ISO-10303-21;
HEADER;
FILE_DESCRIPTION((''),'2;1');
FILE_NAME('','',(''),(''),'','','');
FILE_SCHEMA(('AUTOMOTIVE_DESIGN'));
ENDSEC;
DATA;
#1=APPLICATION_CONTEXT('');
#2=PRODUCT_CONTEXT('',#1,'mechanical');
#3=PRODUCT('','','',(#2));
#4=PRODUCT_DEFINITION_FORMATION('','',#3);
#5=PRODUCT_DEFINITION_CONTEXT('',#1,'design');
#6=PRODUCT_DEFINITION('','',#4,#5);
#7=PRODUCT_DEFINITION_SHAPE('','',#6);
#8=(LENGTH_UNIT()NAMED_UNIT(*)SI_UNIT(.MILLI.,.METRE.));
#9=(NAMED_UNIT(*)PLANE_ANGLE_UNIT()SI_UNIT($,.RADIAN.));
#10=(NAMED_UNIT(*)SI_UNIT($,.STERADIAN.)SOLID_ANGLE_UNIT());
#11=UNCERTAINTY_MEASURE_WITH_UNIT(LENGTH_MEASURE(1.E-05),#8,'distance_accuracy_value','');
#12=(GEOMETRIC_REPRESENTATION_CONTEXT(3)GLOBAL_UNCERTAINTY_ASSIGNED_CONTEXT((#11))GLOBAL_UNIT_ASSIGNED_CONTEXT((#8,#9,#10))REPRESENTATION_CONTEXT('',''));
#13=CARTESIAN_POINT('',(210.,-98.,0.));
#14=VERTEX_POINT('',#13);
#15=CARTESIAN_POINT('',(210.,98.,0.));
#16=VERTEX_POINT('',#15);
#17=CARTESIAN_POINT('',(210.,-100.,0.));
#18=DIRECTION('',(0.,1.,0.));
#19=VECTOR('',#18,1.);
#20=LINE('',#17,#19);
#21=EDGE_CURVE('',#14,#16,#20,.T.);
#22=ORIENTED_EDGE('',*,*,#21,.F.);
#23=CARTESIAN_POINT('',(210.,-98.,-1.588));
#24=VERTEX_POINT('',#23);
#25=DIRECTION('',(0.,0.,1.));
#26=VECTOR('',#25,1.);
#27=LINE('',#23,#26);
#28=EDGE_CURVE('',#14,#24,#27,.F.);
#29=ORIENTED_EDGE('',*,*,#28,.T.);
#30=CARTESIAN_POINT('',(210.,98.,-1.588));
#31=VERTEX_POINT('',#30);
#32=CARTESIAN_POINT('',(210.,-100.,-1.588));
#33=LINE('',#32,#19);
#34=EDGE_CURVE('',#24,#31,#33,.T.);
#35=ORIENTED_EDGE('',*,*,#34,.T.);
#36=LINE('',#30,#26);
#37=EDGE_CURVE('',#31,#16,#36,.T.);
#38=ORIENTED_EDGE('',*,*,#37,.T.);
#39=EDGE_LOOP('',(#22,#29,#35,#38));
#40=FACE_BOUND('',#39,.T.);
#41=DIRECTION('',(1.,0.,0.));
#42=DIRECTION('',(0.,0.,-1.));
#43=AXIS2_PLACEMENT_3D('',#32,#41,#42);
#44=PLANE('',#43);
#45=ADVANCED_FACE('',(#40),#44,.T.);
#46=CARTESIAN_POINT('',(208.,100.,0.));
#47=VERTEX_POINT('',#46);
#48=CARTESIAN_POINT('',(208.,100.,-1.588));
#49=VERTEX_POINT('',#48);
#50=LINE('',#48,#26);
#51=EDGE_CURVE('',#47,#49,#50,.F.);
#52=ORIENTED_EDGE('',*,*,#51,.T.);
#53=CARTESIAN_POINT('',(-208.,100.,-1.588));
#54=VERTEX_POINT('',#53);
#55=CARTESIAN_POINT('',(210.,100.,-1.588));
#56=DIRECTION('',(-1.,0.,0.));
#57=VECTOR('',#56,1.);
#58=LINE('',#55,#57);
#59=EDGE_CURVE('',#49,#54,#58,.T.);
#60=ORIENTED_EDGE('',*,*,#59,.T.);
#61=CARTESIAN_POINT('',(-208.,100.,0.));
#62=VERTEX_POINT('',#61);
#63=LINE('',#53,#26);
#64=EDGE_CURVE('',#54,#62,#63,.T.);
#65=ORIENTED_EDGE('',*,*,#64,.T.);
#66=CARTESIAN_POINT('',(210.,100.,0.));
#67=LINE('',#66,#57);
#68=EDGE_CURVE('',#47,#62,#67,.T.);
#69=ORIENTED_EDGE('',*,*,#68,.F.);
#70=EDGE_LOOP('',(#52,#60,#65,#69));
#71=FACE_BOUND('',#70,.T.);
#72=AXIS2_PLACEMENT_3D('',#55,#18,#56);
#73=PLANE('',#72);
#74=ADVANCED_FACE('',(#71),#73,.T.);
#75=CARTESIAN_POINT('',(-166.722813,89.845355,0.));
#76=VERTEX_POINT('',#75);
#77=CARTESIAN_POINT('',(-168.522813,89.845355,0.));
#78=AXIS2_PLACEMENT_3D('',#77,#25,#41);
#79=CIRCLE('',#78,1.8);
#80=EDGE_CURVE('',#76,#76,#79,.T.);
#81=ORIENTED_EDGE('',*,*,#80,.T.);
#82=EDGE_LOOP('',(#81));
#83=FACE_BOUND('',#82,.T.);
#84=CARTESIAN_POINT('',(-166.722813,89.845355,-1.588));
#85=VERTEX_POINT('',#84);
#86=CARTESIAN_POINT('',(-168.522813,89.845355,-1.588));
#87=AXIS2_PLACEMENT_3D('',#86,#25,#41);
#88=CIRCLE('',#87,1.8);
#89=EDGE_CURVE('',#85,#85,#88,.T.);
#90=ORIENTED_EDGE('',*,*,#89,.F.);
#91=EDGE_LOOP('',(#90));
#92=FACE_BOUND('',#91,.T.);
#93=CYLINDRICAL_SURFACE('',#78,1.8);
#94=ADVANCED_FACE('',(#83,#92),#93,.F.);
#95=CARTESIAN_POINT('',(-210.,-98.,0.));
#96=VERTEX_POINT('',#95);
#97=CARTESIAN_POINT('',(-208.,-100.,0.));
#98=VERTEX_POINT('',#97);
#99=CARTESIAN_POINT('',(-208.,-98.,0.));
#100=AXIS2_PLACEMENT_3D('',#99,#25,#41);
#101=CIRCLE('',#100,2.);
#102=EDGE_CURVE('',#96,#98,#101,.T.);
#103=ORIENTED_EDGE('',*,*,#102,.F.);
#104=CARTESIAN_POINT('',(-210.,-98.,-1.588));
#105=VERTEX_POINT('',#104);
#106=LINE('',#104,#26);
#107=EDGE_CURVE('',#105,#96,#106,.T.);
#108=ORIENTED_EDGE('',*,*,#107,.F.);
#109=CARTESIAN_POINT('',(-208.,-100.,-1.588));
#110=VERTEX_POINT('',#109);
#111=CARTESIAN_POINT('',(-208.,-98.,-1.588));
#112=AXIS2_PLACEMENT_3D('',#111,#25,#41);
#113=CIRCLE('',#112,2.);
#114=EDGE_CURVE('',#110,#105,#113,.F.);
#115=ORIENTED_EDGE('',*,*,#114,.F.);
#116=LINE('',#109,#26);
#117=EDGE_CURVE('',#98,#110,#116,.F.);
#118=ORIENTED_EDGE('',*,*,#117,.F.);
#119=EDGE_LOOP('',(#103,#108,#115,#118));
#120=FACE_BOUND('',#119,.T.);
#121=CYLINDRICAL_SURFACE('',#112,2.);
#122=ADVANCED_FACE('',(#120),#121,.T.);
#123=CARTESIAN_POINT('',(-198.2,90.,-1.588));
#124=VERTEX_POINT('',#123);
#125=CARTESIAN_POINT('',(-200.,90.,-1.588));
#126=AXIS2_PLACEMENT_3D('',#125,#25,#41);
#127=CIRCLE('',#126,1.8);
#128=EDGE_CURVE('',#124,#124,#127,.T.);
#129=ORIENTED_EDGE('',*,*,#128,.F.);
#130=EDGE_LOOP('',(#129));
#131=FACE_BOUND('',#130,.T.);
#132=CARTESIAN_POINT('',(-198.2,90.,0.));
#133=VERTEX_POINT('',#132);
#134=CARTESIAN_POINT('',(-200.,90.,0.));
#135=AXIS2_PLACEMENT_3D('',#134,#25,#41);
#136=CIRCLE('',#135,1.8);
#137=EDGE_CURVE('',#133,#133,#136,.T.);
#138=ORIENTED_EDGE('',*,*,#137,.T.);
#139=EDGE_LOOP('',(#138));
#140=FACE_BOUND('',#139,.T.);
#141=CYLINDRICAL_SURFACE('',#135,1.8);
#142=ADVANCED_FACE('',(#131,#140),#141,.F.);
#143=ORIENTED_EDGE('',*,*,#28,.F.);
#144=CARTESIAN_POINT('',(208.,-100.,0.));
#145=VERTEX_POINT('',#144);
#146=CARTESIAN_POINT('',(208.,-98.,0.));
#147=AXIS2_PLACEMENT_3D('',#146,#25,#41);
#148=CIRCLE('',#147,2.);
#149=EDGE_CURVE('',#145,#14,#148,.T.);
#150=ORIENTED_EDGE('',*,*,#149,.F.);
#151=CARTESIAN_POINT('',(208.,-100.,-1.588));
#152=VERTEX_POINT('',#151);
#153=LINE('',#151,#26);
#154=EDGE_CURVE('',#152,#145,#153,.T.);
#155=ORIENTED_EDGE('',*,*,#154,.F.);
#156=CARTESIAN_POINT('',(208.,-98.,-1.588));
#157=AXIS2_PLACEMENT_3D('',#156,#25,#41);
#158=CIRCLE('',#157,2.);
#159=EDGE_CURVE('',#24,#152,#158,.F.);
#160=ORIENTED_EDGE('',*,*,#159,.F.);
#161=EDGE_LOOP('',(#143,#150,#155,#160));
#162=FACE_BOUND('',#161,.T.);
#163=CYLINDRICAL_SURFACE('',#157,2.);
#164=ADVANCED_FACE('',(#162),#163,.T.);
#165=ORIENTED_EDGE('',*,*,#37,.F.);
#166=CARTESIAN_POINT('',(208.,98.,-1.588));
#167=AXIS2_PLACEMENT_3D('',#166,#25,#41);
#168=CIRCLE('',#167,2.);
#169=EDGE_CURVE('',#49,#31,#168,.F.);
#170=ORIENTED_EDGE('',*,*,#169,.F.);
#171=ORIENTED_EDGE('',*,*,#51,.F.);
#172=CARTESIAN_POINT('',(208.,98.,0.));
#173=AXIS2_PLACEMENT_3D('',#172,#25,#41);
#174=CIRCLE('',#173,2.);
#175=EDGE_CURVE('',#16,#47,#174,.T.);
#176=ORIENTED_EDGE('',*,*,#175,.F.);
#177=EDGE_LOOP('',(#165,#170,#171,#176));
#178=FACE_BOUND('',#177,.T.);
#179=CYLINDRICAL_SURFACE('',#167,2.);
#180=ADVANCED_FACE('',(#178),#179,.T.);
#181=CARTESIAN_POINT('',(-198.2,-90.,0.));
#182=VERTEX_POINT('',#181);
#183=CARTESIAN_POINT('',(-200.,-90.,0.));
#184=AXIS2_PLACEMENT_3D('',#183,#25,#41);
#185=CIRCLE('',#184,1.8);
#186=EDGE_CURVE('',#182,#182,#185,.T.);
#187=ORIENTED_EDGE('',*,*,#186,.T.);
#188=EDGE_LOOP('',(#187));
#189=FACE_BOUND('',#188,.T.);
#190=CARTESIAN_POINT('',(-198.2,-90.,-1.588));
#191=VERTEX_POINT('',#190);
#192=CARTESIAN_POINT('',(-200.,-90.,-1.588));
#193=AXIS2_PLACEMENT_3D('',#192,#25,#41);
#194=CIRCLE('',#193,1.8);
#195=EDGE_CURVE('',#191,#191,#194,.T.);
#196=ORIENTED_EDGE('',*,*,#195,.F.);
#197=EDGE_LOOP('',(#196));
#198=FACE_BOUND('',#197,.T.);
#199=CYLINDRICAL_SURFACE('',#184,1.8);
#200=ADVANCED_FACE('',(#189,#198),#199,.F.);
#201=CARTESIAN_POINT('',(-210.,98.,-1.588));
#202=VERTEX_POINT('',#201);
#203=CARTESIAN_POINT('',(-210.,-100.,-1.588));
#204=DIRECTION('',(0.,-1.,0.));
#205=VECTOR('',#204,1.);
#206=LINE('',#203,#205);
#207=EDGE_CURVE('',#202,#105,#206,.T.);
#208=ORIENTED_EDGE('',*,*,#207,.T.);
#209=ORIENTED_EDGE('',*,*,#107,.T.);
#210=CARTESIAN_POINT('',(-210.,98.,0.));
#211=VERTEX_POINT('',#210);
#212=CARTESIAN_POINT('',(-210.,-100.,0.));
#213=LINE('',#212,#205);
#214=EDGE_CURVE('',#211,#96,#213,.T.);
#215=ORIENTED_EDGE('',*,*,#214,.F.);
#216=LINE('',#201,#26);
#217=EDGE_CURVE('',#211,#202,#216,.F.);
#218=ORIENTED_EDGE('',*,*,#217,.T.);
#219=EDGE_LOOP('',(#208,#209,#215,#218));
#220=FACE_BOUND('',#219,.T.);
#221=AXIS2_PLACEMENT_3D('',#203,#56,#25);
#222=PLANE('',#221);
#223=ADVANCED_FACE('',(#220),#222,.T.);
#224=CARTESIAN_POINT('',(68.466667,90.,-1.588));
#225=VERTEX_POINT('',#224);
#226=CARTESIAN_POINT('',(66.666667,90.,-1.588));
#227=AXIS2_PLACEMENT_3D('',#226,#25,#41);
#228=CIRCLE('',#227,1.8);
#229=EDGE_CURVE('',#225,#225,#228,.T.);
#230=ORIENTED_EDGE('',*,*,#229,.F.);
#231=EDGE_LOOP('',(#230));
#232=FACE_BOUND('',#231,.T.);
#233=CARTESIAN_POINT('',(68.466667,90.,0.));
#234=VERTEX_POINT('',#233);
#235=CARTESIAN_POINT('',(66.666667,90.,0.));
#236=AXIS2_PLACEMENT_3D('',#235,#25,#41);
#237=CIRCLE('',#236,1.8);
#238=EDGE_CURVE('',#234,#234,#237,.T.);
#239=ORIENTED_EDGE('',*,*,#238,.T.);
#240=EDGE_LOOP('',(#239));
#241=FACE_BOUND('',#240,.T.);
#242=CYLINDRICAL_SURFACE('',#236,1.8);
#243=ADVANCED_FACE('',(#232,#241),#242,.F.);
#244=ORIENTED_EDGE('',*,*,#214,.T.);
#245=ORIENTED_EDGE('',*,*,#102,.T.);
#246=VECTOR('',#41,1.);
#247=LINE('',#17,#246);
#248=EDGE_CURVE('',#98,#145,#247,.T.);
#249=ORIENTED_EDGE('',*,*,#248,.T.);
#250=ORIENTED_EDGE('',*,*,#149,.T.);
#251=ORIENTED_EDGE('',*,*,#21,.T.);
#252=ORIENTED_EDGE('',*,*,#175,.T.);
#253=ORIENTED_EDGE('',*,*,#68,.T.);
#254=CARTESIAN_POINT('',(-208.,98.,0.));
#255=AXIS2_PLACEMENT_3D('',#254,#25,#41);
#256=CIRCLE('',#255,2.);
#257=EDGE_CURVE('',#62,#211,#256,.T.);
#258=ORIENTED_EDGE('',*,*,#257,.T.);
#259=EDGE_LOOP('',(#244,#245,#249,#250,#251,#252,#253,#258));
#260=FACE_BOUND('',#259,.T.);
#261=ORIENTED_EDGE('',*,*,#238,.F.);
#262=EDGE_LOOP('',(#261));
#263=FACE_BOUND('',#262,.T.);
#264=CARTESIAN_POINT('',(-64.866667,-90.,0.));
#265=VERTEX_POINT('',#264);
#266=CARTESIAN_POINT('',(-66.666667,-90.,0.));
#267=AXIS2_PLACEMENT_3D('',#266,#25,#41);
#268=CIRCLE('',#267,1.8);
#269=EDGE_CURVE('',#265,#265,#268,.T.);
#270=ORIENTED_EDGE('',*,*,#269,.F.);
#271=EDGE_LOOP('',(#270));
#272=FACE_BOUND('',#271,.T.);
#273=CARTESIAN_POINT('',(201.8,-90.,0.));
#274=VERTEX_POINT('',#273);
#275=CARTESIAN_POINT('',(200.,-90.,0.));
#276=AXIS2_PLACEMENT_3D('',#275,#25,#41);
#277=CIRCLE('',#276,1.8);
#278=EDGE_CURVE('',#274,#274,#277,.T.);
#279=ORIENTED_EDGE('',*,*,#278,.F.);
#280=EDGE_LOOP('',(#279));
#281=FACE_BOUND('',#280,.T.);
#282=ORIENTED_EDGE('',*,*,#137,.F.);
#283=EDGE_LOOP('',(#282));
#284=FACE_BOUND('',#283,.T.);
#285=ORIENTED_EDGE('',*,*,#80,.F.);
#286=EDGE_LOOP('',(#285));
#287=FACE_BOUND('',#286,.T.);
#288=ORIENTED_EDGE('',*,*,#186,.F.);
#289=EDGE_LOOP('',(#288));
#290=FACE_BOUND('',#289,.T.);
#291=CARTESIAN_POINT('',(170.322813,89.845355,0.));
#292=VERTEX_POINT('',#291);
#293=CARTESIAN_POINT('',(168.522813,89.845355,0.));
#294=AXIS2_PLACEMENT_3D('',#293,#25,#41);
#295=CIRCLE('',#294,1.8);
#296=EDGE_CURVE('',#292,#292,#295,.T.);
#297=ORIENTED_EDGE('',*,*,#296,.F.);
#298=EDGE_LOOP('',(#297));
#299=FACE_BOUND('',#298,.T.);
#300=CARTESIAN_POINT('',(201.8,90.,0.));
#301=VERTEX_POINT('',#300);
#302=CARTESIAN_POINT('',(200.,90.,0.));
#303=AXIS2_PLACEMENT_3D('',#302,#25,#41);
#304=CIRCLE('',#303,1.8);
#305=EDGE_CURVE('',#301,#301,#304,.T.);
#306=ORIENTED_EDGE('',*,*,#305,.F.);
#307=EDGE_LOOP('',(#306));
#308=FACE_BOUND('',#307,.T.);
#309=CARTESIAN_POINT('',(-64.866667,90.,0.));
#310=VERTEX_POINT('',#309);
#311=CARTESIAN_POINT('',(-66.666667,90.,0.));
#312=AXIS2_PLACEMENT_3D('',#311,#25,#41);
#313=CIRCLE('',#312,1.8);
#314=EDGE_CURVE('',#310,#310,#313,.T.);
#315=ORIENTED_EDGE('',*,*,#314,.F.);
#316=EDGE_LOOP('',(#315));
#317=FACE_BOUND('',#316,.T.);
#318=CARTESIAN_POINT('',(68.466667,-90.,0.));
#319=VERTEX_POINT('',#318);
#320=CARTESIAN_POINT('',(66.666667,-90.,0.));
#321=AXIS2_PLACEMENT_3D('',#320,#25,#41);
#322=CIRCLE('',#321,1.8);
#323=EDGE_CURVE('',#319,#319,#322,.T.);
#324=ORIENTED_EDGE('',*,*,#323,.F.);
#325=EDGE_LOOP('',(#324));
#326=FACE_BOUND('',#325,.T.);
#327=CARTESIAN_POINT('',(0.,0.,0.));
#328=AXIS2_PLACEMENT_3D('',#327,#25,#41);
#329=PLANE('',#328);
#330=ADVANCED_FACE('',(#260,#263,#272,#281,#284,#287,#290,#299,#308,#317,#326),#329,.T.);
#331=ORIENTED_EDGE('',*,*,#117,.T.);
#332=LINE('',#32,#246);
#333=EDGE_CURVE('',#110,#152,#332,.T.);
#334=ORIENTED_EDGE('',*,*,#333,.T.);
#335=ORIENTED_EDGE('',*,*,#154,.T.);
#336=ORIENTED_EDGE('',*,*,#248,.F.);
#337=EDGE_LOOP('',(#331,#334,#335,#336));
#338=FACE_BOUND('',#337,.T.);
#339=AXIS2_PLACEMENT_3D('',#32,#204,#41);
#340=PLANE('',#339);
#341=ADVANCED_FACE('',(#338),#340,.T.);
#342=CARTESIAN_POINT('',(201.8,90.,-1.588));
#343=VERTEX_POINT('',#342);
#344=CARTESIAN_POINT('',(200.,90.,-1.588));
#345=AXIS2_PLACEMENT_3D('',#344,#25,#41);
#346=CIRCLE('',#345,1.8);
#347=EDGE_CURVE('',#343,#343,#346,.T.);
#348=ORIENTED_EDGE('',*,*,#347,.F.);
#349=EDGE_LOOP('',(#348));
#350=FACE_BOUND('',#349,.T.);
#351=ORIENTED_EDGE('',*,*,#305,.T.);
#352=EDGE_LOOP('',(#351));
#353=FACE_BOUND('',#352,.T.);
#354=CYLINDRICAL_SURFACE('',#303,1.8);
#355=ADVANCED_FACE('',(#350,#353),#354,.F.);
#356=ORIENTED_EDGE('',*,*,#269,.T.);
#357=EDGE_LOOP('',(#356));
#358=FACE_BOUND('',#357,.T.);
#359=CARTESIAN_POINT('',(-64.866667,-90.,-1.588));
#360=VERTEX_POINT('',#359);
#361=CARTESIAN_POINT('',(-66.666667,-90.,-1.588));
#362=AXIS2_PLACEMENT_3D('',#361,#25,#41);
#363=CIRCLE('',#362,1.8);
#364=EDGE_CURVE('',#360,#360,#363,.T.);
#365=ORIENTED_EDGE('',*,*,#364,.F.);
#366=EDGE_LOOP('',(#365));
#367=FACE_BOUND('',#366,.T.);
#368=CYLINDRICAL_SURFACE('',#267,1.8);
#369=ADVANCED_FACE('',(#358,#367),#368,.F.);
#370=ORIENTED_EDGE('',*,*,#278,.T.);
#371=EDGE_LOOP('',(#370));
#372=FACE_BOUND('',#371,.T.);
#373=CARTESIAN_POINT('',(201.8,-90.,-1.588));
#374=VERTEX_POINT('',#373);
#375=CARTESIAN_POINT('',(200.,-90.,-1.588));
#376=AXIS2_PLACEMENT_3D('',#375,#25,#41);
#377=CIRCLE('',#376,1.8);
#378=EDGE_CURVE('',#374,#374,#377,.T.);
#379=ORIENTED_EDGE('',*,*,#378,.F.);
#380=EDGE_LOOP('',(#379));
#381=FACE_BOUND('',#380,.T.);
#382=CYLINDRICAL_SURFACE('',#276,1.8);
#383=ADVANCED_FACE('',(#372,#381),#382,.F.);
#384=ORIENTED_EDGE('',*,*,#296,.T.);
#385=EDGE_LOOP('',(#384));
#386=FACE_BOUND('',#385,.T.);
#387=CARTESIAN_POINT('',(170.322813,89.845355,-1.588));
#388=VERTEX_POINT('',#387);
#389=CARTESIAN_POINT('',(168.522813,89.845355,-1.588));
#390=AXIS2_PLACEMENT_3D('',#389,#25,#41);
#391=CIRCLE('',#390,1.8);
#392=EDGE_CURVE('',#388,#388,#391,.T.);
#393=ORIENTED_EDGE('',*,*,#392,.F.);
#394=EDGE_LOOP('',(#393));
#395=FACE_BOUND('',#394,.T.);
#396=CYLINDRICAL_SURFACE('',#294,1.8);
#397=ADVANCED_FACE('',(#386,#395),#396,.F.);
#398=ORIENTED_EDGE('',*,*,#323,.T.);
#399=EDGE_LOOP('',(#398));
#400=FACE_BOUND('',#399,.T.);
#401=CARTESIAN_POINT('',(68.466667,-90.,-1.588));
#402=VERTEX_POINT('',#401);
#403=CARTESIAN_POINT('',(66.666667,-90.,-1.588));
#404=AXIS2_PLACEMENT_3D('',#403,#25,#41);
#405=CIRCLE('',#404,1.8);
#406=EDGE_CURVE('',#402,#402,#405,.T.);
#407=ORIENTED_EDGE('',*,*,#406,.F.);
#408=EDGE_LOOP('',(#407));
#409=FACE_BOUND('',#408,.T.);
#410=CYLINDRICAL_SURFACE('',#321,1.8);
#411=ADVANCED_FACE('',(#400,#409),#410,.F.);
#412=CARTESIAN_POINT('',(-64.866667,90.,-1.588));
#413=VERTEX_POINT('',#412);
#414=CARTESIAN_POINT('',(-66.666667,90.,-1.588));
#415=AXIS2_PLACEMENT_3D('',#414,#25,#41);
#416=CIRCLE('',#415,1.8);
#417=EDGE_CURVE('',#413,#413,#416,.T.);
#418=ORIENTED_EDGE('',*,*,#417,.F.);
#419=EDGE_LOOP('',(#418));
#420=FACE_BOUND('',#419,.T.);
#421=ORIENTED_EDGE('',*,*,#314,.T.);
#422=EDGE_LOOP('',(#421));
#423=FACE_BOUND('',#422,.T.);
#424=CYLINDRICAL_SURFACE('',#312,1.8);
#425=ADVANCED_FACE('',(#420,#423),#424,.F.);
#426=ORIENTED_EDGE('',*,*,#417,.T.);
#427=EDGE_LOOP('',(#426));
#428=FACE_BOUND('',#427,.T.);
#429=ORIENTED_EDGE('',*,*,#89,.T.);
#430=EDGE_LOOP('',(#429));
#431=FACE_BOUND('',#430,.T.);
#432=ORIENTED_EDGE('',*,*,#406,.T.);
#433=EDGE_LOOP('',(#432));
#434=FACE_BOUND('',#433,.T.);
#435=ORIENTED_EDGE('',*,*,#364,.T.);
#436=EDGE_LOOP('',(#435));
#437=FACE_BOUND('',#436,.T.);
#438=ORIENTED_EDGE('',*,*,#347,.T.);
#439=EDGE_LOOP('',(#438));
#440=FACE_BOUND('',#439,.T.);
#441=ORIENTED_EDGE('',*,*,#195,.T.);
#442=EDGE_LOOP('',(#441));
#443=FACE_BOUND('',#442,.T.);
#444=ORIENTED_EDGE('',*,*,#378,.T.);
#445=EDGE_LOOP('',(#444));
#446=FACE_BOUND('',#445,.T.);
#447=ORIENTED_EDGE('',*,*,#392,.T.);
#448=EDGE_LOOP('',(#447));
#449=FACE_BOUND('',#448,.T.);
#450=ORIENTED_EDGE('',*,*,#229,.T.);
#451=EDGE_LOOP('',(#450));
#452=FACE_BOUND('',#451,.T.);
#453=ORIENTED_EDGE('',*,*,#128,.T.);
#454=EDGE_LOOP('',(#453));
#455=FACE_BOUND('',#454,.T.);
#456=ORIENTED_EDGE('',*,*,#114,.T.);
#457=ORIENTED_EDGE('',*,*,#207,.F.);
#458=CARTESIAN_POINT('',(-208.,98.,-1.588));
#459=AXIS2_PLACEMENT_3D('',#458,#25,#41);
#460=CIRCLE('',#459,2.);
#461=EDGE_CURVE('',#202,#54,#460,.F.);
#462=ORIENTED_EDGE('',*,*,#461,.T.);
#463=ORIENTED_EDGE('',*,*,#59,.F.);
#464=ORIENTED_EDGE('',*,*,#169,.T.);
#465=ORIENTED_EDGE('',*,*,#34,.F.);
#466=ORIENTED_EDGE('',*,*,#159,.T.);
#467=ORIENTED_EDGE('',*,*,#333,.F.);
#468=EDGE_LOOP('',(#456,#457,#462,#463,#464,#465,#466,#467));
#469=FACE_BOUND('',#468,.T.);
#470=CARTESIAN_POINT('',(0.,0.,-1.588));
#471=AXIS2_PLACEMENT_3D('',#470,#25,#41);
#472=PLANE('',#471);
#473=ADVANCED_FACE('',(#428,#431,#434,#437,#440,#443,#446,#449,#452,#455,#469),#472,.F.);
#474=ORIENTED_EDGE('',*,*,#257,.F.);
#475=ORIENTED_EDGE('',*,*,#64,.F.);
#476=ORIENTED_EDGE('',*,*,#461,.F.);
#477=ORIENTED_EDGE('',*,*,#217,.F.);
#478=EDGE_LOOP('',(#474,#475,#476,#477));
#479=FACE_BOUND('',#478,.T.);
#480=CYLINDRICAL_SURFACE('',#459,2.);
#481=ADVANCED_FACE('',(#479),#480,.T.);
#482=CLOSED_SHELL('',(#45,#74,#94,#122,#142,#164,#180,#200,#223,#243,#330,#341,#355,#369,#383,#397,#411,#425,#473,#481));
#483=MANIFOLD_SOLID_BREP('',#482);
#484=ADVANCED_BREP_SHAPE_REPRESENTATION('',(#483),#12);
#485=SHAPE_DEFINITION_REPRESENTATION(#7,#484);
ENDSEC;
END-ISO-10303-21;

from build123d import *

# Parameters (mm, degrees)
SKETCH1_W            = 420
SKETCH1_H            = 200
BASE_FLANGE1_DEPTH   = 1.588
BREAK_CORNER1_START  = -1.588
BREAK_CORNER1_DEPTH  = 1.588
M3_CLEARANCE_HOLE1_D = 3.6
LPATTERN1_COUNT      = 4
LPATTERN1_PITCH      = 133.333333333
MIRROR1_COPY_1_D     = 3.6
MIRROR1_COPY_2_D     = 3.6
MIRROR1_COPY_3_D     = 3.6
M3_CLEARANCE_HOLE2_D = 3.6


# Read off the part's stored shape, not the designer's step: Break-Corner1
# Sheet-metal steps are written as plain solids
with BuildPart() as part:
    # Sketch1 → Base-Flange1 (new body)
    with BuildSketch(Plane.XY):
        Rectangle(SKETCH1_W, SKETCH1_H)
    extrude(amount=-BASE_FLANGE1_DEPTH)

    # Break-Corner1 outline → Break-Corner1 (cut)
    with BuildSketch(Plane.XY.offset(BREAK_CORNER1_START)):
        with BuildLine():
            ThreePointArc((-208, -100), (-209.414213562, -99.414213562), (-210, -98))
            Line((-210, -98), (-210, -100))
            Line((-210, -100), (-208, -100))
        make_face()
        with BuildLine():
            Line((-210, 100), (-210, 98))
            ThreePointArc((-210, 98), (-209.414213562, 99.414213562), (-208, 100))
            Line((-208, 100), (-210, 100))
        make_face()
        with BuildLine():
            ThreePointArc((210, -98), (209.414213562, -99.414213562), (208, -100))
            Line((208, -100), (210, -100))
            Line((210, -100), (210, -98))
        make_face()
        with BuildLine():
            Line((210, 100), (208, 100))
            ThreePointArc((208, 100), (209.414213562, 99.414213562), (210, 98))
            Line((210, 98), (210, 100))
        make_face()
    extrude(amount=BREAK_CORNER1_DEPTH, mode=Mode.SUBTRACT)

    # M3 Clearance Hole1 (through all)
    with Locations(Plane.XY):
        with Locations((-200, 90)):
            m3_clearance_hole1 = Hole(M3_CLEARANCE_HOLE1_D / 2)

    # LPattern1: M3 Clearance Hole1 ×4
    with Locations(*[(i * LPATTERN1_PITCH, 0, 0) for i in range(1, LPATTERN1_COUNT)]):
        add(m3_clearance_hole1, mode=Mode.SUBTRACT)

    # Mirror1: M3 Clearance Hole1 across plane
    add(m3_clearance_hole1.mirror(Plane.ZX), mode=Mode.SUBTRACT)

    # Mirror1 copy 1 (through all)
    with Locations(Plane(origin=(133.333333333, 0, 0), x_dir=(1, 0, 0), z_dir=(0, 0, 1))):
        with Locations((-200, -90)):
            Hole(MIRROR1_COPY_1_D / 2)

    # Mirror1 copy 2 (through all)
    with Locations(Plane(origin=(266.666666667, 0, 0), x_dir=(1, 0, 0), z_dir=(0, 0, 1))):
        with Locations((-200, -90)):
            Hole(MIRROR1_COPY_2_D / 2)

    # Mirror1 copy 3 (through all)
    with Locations(Plane(origin=(400, 0, 0), x_dir=(1, 0, 0), z_dir=(0, 0, 1))):
        with Locations((-200, -90)):
            Hole(MIRROR1_COPY_3_D / 2)

    # M3 Clearance Hole2 (through all)
    with Locations(Plane.XY):
        with Locations((-168.522812918, 89.845354769)):
            m3_clearance_hole2 = Hole(M3_CLEARANCE_HOLE2_D / 2)

    # Mirror3: M3 Clearance Hole2 across plane
    add(m3_clearance_hole2.mirror(Plane(origin=(0, 0, 0), x_dir=(0, 0, 1), z_dir=(1, 0, 0))), mode=Mode.SUBTRACT)


solid = part.part
